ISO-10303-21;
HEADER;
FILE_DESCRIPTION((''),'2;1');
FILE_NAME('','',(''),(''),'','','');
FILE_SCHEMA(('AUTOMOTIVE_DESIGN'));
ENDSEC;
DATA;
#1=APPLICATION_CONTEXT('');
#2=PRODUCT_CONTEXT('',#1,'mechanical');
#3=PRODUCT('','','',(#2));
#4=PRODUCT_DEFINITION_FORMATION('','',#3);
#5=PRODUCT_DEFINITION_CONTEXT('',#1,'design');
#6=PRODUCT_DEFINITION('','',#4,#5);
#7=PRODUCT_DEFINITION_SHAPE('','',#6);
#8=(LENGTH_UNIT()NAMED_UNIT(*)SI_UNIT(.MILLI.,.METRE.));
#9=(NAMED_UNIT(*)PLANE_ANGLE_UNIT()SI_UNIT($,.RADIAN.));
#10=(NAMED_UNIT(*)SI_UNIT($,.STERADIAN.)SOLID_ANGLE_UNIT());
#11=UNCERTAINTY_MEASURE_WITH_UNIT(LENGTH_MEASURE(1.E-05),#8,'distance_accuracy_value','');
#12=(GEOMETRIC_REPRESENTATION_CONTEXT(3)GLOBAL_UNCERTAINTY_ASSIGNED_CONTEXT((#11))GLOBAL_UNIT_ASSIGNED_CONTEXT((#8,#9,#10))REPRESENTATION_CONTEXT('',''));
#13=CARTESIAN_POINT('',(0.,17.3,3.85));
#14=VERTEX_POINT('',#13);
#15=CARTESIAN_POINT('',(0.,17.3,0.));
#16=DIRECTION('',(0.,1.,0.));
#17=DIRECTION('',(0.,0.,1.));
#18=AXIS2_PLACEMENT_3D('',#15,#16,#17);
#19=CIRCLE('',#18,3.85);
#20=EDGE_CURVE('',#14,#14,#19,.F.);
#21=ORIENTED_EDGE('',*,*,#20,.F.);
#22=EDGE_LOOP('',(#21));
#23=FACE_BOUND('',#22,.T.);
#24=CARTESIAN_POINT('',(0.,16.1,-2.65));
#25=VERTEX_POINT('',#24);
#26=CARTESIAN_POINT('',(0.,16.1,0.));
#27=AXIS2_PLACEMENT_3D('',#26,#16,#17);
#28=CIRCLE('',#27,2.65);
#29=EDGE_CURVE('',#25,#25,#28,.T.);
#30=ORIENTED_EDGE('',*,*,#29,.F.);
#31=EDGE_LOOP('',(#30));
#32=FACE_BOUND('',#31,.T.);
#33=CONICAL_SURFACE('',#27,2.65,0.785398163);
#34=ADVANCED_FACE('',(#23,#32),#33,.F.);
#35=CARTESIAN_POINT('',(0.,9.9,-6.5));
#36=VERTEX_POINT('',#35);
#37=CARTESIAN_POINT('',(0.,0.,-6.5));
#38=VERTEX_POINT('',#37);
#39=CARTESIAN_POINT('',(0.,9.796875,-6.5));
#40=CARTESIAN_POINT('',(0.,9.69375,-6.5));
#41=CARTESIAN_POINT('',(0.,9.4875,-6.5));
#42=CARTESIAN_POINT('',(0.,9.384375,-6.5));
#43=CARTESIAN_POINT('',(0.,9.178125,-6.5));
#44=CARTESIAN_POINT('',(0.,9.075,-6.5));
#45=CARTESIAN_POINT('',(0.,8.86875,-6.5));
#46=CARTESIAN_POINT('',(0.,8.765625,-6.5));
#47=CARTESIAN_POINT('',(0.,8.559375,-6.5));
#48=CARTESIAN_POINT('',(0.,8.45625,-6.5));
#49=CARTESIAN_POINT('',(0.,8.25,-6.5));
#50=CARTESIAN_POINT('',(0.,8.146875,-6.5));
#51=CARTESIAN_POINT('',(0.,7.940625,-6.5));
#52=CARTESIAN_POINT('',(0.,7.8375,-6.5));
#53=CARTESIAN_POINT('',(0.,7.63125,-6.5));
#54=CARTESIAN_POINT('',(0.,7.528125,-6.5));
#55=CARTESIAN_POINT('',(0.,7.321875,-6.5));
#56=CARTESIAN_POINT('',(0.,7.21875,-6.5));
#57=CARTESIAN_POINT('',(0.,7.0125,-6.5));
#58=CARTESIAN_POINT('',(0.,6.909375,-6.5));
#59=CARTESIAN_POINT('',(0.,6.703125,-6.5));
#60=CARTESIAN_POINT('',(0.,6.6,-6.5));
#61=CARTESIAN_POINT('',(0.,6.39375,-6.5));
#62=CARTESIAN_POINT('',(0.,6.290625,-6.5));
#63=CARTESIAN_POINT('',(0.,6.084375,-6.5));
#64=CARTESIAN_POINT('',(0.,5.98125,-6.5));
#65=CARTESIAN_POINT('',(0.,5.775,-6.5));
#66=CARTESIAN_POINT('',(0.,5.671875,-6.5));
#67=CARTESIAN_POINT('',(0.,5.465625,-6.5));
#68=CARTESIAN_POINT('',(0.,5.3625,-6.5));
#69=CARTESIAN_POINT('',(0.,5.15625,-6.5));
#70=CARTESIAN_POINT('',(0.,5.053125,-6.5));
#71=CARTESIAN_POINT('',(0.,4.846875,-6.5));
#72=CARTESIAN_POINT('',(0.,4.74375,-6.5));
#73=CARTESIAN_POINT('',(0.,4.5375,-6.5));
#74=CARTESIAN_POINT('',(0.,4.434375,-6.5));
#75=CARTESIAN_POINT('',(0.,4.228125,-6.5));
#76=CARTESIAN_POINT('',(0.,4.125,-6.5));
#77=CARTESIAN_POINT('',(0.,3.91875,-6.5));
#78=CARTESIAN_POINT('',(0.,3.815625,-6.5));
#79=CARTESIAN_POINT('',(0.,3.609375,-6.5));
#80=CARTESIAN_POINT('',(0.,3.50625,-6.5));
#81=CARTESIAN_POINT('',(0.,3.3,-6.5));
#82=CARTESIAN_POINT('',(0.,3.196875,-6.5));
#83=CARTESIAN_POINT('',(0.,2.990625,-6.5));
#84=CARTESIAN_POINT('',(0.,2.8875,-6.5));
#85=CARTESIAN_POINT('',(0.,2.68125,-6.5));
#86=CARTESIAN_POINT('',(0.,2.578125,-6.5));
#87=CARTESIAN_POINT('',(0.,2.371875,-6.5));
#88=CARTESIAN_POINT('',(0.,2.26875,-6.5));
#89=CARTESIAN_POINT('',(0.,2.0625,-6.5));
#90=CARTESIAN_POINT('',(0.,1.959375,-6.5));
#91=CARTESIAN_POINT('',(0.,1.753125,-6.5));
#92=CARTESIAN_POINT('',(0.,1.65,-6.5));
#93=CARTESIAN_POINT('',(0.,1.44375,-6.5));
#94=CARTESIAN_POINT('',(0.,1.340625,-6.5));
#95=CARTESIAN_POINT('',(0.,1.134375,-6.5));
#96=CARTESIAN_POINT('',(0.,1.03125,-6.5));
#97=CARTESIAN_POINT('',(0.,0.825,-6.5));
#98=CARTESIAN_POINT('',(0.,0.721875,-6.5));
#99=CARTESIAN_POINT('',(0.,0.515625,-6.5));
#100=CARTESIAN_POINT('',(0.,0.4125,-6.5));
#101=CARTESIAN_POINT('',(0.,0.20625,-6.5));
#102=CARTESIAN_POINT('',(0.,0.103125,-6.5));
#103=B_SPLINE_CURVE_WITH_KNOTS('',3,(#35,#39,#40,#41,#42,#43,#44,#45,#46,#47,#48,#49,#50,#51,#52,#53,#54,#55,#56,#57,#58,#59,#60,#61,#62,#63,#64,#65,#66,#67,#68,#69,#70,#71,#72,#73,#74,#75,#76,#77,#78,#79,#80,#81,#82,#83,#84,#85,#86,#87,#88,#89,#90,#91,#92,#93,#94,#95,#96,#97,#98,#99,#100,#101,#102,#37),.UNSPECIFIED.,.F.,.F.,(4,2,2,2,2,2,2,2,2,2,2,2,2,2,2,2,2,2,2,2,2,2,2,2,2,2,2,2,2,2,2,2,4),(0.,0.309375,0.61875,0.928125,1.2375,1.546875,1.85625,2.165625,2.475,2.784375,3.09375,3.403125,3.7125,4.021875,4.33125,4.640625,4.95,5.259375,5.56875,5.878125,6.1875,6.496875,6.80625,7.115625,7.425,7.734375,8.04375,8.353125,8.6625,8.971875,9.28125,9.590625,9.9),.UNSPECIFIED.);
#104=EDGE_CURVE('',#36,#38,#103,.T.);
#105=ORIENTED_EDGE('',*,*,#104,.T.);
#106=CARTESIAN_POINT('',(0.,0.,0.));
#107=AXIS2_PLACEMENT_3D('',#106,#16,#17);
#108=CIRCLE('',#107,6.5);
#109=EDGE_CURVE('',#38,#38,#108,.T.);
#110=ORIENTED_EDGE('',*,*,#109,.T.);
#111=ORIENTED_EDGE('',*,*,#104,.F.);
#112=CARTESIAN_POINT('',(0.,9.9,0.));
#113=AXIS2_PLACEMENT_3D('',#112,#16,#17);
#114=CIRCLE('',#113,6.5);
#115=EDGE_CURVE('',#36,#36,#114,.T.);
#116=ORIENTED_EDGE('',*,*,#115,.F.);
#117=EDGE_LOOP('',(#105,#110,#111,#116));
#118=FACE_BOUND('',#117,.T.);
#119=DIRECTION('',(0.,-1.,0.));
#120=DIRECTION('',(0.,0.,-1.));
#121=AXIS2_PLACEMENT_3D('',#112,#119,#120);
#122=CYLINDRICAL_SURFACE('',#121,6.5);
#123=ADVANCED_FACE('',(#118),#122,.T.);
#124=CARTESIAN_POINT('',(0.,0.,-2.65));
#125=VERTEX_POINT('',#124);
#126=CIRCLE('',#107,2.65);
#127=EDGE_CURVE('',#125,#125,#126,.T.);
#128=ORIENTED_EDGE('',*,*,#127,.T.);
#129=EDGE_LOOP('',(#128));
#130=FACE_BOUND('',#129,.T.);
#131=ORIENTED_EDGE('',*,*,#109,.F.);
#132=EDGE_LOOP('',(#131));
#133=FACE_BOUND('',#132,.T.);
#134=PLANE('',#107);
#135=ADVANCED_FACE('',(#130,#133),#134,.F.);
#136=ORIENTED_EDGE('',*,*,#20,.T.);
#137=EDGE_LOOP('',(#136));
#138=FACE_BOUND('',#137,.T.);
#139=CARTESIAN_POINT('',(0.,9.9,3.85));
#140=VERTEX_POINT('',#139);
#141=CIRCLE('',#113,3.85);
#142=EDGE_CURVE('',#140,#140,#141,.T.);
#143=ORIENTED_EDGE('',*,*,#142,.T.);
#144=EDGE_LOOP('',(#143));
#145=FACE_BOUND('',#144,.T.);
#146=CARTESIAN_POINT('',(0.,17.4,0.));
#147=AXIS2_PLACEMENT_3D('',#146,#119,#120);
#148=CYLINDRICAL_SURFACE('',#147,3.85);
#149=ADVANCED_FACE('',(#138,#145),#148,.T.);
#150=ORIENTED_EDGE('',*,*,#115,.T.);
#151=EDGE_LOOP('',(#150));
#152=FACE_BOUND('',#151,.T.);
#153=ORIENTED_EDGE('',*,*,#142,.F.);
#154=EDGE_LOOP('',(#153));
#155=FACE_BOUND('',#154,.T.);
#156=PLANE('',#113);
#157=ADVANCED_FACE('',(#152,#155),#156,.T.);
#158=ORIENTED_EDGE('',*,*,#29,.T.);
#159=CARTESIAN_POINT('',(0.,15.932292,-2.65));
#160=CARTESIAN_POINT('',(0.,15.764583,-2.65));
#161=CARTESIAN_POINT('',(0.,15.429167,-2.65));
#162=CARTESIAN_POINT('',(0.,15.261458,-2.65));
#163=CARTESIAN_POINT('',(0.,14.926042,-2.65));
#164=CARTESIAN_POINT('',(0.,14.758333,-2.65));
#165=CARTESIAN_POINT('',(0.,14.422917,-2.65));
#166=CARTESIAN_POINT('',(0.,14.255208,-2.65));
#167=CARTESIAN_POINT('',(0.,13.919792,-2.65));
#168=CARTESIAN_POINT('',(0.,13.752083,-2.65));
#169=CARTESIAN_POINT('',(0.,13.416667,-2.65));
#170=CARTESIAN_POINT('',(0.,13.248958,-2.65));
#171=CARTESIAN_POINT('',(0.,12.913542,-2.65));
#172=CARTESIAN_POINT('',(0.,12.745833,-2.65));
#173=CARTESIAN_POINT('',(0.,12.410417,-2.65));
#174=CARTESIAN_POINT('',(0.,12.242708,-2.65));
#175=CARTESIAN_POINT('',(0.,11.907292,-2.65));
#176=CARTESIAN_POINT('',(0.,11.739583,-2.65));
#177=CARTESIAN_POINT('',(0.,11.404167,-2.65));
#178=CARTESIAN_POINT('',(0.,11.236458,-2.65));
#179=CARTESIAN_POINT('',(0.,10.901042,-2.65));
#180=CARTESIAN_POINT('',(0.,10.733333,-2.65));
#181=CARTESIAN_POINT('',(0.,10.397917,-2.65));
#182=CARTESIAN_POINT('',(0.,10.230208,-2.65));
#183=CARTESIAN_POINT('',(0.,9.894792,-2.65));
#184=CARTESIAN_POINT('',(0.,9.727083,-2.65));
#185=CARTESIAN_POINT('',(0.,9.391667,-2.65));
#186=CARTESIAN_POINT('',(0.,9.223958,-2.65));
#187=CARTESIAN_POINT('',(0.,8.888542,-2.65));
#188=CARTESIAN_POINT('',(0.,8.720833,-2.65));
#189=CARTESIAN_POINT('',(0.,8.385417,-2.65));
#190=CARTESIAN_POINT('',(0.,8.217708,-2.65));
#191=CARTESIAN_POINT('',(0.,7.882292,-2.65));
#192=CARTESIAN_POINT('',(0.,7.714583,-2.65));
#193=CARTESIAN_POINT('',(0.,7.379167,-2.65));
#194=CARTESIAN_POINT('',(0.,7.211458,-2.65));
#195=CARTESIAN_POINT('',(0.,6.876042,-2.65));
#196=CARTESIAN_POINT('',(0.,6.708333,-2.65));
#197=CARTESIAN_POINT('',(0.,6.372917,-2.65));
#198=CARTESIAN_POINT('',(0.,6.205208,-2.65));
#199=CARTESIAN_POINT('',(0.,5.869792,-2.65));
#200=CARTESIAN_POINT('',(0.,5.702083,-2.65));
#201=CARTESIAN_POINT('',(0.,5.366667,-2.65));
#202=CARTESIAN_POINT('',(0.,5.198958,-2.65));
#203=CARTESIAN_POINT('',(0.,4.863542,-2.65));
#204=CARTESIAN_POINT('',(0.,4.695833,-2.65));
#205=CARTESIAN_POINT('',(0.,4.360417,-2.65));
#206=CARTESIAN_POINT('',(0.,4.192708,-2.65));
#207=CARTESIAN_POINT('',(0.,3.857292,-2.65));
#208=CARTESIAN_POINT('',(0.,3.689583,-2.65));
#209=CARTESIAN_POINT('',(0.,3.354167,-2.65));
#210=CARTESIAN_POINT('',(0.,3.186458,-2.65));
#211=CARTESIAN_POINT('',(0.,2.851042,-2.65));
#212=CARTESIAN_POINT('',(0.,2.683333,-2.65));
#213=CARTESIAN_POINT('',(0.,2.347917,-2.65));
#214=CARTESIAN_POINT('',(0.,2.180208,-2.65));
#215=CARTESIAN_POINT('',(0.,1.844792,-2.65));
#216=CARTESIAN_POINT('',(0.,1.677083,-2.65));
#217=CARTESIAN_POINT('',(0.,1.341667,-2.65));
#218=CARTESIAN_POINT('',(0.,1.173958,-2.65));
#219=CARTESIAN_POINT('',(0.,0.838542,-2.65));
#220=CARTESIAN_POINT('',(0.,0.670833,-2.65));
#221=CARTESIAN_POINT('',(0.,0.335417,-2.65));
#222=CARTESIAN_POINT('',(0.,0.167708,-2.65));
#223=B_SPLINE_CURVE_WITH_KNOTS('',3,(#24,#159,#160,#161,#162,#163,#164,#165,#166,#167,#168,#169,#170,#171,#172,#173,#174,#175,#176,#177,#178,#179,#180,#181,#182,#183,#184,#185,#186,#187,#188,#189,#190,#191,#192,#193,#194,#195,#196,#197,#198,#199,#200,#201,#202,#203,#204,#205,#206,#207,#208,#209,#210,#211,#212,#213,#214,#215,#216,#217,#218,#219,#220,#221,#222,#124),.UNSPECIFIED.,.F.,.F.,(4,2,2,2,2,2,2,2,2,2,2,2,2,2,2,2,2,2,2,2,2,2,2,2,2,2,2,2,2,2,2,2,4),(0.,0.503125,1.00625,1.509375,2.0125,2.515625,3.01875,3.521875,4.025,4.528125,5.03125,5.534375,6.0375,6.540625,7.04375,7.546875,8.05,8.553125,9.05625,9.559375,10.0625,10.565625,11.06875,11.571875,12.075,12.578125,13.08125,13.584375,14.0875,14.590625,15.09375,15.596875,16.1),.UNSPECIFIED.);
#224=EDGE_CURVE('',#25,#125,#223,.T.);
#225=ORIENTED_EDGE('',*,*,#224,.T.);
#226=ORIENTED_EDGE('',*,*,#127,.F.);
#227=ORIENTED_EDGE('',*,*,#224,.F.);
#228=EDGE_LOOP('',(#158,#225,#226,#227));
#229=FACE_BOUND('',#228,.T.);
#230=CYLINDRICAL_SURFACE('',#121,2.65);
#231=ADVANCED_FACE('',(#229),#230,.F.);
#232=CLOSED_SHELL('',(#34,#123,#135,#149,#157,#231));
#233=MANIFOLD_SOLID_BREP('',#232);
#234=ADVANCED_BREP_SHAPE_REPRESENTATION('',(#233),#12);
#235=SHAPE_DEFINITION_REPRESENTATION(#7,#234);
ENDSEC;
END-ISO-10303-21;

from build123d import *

# Parameters (mm, degrees)
ESQUISSE1_R        = 6.5
ESQUISSE1_R_2      = 2.65
BOSS_EXTRU_1_DEPTH = 9.9
ESQUISSE2_R        = 3.85
ESQUISSE2_R_2      = 2.65
BOSS_EXTRU_2_DEPTH = 7.5
CHANFREIN1_SIZE    = 1.3


with BuildPart() as part:
    # Esquisse1 → Boss.-Extru.1 (new body)
    with BuildSketch(Plane(origin=(0, 0, 0), x_dir=(1, 0, 0), z_dir=(0, 1, 0))):
        with Locations(Location((0, 0, 0), (0, 0, 90))):
            Circle(ESQUISSE1_R)
        with Locations(Location((0, 0, 0), (0, 0, 90))):
            Circle(ESQUISSE1_R_2, mode=Mode.SUBTRACT)
    extrude(amount=BOSS_EXTRU_1_DEPTH)

    # Esquisse2 → Boss.-Extru.2 (add)
    with BuildSketch(Plane(origin=(0, 9.9, 0), x_dir=(1, 0, 0), z_dir=(0, 1, 0))):
        with Locations(Location((0, 0, 0), (0, 0, 270))):
            Circle(ESQUISSE2_R)
        with Locations(Location((0, 0, 0), (0, 0, 90))):
            Circle(ESQUISSE2_R_2, mode=Mode.SUBTRACT)
    extrude(amount=BOSS_EXTRU_2_DEPTH)

    # Chanfrein1
    # the kernel refuses this chamfer: 1.3 mm, written as the material it takes off along each edge
    with BuildSketch(Plane(origin=(0, 17.4, 0), x_dir=(0, 0, -1), z_dir=(1, 0, 0))) as chanfrein1_piece_1:
        Polygon((2.65 + CHANFREIN1_SIZE, 0), (2.65, -CHANFREIN1_SIZE), (2.65, 0), align=None)
    revolve(axis=Axis((0, 17.4, 0), (0, 1, 0)), mode=Mode.SUBTRACT)


solid = part.part
